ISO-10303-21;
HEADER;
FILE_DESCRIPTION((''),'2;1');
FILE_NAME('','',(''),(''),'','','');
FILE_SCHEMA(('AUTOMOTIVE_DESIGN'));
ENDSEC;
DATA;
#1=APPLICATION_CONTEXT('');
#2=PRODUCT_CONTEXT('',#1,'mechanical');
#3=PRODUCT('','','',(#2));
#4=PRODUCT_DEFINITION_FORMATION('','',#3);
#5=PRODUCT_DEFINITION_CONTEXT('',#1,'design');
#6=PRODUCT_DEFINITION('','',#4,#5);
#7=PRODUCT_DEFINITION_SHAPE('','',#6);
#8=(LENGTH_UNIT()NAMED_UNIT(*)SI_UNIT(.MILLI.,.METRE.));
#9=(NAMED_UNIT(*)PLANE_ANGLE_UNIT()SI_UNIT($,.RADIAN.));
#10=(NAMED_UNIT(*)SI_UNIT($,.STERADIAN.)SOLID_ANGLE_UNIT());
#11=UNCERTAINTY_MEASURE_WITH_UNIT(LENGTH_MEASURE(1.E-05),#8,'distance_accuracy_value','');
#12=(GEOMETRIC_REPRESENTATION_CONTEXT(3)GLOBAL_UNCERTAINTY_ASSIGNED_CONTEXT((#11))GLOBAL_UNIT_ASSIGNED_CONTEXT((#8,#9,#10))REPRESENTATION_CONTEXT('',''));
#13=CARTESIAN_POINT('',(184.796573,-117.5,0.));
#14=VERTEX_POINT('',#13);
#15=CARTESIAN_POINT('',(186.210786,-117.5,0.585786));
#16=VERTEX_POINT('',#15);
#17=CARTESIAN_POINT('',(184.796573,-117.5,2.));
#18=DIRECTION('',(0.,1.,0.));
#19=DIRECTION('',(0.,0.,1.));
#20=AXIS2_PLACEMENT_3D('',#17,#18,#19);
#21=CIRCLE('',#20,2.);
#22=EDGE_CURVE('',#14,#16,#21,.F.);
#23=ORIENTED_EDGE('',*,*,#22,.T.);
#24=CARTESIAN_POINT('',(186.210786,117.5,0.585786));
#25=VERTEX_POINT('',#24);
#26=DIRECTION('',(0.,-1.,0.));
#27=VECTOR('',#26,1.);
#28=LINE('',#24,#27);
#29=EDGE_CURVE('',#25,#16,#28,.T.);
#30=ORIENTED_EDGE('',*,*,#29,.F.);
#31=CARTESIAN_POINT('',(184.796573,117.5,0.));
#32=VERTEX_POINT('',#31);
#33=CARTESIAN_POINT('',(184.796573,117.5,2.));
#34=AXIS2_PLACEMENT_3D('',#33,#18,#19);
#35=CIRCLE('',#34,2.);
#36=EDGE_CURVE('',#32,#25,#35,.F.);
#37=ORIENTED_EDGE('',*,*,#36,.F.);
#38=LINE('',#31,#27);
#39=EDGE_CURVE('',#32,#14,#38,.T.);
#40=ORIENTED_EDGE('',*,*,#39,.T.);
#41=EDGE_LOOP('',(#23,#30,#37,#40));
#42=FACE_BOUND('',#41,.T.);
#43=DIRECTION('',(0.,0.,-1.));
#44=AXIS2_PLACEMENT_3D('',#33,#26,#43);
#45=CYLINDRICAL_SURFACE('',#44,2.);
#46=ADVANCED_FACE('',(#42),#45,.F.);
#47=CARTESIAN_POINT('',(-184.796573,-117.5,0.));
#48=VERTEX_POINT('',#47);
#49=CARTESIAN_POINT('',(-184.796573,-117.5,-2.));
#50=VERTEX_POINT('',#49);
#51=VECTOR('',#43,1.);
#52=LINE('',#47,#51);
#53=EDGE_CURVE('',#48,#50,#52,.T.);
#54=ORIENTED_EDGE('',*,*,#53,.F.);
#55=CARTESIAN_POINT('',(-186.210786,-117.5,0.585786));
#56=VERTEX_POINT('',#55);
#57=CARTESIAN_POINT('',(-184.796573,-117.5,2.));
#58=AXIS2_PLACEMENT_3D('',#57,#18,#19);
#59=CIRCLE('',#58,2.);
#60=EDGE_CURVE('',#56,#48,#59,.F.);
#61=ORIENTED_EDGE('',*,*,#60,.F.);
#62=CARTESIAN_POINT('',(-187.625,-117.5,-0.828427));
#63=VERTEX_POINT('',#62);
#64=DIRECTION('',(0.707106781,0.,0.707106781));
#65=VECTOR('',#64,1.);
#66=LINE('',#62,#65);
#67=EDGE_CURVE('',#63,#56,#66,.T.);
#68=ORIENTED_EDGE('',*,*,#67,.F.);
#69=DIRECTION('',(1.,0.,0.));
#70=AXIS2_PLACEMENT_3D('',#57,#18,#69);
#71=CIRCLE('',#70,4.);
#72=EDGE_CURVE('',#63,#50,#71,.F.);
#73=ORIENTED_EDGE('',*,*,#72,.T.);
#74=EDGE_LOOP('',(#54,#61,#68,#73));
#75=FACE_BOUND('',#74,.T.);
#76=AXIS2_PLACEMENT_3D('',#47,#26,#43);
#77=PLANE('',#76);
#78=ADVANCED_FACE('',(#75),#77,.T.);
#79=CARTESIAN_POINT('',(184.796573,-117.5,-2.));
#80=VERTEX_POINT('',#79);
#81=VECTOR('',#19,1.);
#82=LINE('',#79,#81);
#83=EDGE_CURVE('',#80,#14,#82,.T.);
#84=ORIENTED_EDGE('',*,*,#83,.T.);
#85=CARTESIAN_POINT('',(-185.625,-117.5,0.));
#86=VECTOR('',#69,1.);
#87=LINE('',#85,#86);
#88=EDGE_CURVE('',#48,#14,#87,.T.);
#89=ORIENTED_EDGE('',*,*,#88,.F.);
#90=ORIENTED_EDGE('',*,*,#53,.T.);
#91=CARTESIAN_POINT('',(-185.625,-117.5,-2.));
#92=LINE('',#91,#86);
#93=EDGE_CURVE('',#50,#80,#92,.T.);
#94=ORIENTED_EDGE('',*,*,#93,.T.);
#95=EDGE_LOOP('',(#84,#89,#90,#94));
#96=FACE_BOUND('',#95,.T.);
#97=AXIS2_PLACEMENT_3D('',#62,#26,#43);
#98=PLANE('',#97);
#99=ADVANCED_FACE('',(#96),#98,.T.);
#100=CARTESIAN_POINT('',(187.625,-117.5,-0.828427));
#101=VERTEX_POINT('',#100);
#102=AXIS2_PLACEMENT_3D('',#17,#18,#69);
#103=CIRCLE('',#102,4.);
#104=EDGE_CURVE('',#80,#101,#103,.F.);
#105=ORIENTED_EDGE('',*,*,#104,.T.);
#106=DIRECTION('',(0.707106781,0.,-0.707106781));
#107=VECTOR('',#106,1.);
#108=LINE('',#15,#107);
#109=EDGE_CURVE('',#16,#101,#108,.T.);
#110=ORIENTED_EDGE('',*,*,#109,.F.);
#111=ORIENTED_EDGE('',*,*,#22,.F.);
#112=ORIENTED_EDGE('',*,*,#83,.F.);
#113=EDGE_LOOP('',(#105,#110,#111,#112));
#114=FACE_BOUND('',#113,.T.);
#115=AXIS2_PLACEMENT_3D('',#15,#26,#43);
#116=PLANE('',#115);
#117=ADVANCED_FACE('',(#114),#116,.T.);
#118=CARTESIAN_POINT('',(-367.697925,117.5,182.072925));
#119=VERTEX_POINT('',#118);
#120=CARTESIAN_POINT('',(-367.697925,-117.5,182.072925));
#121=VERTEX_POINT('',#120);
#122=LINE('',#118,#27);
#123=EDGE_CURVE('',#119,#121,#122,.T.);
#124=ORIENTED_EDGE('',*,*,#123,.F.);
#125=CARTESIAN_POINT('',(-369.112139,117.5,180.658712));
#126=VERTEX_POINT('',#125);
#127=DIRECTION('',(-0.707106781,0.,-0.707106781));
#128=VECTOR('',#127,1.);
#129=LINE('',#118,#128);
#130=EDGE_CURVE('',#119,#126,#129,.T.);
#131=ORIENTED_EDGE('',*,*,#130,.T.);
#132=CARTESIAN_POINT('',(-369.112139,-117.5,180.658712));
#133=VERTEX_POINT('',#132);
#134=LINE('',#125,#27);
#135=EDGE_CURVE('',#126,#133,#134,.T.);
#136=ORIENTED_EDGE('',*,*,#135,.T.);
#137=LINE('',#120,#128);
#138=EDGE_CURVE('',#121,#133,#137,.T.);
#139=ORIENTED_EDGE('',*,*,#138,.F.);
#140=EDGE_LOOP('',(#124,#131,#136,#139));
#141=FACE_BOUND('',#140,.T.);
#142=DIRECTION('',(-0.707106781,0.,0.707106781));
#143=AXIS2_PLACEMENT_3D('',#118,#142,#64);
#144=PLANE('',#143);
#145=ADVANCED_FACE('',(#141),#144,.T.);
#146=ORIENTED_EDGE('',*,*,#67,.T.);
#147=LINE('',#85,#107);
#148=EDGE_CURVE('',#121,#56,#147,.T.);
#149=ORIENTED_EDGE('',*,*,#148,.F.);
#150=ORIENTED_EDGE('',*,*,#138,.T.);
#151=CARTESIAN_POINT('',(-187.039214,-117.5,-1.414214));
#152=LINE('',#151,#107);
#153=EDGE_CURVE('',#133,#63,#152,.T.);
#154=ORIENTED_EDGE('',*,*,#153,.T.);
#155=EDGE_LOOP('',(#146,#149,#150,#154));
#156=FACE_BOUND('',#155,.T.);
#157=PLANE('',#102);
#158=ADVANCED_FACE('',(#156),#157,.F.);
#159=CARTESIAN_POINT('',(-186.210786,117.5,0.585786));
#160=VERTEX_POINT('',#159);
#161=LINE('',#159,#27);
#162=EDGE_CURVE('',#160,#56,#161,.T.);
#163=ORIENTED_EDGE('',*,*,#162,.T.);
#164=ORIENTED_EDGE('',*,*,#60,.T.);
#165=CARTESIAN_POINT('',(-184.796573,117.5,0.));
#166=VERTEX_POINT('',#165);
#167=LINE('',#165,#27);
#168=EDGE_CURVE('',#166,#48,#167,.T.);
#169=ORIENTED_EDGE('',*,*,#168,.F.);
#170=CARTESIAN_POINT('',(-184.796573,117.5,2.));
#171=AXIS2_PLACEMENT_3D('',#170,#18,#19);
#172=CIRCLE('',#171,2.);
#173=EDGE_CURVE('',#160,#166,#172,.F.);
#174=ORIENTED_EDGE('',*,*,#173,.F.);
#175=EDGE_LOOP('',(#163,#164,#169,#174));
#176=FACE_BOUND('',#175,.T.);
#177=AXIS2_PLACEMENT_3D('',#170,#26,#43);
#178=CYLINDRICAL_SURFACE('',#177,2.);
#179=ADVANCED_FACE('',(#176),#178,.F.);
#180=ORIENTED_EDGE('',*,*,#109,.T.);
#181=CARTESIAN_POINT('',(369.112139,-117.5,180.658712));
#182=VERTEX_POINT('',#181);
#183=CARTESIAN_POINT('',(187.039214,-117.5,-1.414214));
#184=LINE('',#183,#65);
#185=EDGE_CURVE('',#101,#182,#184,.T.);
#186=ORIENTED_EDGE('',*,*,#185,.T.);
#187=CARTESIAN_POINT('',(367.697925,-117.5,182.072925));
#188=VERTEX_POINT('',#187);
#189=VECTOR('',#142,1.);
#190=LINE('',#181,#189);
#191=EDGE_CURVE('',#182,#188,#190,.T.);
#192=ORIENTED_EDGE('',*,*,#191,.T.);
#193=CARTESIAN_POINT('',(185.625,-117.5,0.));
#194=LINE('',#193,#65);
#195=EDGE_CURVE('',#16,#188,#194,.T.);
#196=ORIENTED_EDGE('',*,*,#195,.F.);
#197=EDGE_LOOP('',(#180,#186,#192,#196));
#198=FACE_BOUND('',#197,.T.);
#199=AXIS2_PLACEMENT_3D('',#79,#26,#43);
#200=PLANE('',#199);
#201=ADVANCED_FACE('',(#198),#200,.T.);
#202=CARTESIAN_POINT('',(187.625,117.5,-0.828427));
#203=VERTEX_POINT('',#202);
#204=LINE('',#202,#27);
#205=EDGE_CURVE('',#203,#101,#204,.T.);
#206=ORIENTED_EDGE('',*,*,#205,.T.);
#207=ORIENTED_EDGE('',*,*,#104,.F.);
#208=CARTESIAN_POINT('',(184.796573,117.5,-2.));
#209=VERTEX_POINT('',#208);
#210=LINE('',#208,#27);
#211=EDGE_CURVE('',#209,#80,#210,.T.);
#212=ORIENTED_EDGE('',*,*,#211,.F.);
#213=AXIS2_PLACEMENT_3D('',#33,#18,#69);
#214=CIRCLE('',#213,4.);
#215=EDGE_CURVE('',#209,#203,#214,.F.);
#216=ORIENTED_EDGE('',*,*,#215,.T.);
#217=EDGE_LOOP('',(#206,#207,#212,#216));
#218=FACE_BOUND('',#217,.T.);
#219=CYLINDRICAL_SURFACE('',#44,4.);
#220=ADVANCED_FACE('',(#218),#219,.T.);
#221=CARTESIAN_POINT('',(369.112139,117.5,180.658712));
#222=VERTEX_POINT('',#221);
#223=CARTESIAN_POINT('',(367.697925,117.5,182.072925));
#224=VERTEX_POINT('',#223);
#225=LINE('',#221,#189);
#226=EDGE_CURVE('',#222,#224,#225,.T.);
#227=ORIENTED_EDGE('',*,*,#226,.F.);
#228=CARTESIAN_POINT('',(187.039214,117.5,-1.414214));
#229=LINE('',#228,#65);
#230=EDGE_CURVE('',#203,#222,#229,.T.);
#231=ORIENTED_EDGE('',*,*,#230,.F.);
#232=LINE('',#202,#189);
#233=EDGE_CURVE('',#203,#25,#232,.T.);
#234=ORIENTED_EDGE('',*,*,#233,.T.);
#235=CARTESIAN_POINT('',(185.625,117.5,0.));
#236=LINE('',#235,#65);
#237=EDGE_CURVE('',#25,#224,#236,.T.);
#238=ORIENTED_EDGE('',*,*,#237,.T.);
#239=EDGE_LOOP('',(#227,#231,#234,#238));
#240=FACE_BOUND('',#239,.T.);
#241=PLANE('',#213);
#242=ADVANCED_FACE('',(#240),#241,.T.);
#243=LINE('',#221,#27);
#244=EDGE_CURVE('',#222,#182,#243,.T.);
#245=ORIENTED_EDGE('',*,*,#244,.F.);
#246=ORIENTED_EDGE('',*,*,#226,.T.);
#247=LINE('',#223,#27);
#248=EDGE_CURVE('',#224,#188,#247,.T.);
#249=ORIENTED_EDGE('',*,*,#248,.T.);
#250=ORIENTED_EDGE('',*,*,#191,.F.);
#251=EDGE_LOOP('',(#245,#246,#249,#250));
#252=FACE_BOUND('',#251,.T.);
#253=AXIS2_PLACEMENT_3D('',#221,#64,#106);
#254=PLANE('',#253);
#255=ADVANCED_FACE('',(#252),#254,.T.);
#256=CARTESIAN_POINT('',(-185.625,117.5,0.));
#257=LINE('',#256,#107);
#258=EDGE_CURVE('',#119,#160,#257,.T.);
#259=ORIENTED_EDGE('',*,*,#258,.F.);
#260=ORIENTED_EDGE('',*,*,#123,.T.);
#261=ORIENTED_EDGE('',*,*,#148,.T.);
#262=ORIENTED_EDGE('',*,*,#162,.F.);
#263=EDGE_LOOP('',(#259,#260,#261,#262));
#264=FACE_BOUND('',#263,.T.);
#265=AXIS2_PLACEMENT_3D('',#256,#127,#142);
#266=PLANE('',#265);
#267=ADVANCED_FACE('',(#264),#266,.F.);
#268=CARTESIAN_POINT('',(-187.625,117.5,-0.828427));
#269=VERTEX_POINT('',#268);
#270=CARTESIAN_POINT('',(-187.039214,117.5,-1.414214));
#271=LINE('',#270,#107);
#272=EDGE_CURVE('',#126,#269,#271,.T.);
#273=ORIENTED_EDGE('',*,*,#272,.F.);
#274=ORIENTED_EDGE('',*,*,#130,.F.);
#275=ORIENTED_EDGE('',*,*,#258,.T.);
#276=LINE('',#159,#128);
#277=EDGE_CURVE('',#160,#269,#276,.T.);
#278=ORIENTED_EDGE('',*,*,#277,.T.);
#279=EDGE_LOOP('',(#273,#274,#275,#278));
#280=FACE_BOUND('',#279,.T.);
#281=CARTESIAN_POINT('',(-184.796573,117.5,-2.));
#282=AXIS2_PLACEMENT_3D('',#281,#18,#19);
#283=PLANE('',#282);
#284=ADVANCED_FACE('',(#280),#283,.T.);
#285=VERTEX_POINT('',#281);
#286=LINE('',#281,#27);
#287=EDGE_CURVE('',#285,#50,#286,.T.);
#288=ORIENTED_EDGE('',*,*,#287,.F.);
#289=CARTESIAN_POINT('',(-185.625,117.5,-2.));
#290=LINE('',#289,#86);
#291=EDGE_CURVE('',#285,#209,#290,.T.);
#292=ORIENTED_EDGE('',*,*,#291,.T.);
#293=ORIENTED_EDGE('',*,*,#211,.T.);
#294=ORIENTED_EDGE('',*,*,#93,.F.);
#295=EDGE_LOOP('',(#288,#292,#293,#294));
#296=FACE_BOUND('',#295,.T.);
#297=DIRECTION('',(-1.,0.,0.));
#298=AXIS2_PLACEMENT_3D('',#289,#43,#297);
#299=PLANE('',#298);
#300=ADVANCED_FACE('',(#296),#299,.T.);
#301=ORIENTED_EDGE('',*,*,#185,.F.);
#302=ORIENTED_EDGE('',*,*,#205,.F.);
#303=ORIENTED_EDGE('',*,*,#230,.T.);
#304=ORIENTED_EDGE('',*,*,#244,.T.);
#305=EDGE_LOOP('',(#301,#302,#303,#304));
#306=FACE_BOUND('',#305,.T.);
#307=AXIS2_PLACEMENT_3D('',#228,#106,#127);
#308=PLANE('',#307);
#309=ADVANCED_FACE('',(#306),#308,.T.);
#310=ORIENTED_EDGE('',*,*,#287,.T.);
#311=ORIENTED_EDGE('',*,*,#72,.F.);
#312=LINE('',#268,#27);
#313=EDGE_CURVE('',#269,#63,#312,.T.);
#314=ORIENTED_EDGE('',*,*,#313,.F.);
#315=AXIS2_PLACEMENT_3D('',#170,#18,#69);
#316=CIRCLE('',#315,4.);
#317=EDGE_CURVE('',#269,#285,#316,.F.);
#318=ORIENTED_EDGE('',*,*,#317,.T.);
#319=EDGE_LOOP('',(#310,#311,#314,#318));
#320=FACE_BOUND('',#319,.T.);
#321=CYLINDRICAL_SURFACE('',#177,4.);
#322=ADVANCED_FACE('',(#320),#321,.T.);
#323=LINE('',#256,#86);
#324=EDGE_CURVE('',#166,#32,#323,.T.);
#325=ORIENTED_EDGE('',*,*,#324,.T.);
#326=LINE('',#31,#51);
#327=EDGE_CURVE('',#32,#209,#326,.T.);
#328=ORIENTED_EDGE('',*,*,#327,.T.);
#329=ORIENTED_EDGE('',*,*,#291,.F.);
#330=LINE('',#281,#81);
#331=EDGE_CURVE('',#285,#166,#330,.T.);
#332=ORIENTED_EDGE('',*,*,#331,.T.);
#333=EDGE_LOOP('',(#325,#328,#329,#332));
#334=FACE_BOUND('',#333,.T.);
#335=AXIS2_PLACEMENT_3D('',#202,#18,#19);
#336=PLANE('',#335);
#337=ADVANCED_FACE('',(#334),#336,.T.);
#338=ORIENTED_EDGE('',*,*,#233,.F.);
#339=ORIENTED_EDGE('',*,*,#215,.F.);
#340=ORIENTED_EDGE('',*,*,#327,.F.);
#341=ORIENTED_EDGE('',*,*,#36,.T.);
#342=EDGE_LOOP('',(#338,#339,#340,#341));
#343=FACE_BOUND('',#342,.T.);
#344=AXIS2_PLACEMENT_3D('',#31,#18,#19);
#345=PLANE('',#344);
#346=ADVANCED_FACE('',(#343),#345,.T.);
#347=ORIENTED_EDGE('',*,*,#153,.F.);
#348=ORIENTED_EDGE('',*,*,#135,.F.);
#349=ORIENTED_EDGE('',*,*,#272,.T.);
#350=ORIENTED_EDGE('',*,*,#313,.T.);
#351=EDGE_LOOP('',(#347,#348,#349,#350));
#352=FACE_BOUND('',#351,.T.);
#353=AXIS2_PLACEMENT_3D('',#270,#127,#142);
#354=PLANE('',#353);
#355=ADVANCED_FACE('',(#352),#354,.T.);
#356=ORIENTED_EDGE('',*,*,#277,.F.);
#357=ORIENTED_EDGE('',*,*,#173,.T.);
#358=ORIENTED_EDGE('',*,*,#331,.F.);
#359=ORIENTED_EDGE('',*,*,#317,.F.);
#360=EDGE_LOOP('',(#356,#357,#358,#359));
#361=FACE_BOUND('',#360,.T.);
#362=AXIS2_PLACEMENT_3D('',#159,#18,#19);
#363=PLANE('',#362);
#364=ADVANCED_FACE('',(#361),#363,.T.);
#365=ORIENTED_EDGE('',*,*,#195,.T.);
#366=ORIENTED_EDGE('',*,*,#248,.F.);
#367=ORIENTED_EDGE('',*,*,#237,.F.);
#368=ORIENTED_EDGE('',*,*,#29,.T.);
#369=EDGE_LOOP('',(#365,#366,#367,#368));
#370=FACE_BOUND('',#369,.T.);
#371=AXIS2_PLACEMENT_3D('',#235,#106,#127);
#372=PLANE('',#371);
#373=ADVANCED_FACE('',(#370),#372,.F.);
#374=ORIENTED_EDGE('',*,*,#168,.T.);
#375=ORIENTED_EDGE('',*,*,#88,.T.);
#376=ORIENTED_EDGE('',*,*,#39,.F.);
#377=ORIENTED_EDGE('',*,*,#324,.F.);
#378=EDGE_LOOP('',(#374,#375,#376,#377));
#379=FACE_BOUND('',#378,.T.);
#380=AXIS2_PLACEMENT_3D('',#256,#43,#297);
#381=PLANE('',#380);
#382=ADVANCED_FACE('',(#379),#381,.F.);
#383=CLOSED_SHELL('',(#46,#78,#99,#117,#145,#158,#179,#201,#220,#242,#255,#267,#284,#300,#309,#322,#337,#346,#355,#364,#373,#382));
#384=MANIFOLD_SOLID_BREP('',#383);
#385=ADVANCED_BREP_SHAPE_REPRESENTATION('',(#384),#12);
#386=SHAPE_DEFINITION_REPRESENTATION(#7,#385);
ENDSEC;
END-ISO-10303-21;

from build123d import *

# Parameters (mm, degrees)
SM_BASE_FLANGE_1_DEPTH = 117.5


# Sheet-metal steps are written as plain solids
with BuildPart() as part:
    # Sketch 1 → 基体-法兰1 (new, symmetric)
    with BuildSketch(Plane(origin=(0, 0, 0), x_dir=(1, 0, 0), z_dir=(0, 1, 0))):
        with BuildLine():
            Line((-367.697925088, -182.072925088), (-186.210786438, -0.585786438))
            ThreePointArc((-186.210786438, -0.585786438), (-185.56193974, -0.152240935), (-184.796572875, 0))
            Line((-184.796572875, 0), (184.796572875, 0))
            ThreePointArc((184.796572875, 0), (185.56193974, -0.152240935), (186.210786438, -0.585786438))
            Line((186.210786438, -0.585786438), (367.697925088, -182.072925088))
            Line((367.697925088, -182.072925088), (369.11213865, -180.658711525))
            Line((369.11213865, -180.658711525), (187.625, 0.828427125))
            ThreePointArc((187.625, 0.828427125), (186.327306605, 1.69551813), (184.796572875, 2))
            Line((184.796572875, 2), (-184.796572875, 2))
            ThreePointArc((-184.796572875, 2), (-186.327306605, 1.69551813), (-187.625, 0.828427125))
            Line((-187.625, 0.828427125), (-369.11213865, -180.658711525))
            Line((-369.11213865, -180.658711525), (-367.697925088, -182.072925088))
        make_face()
    extrude(amount=SM_BASE_FLANGE_1_DEPTH, both=True)


solid = part.part
